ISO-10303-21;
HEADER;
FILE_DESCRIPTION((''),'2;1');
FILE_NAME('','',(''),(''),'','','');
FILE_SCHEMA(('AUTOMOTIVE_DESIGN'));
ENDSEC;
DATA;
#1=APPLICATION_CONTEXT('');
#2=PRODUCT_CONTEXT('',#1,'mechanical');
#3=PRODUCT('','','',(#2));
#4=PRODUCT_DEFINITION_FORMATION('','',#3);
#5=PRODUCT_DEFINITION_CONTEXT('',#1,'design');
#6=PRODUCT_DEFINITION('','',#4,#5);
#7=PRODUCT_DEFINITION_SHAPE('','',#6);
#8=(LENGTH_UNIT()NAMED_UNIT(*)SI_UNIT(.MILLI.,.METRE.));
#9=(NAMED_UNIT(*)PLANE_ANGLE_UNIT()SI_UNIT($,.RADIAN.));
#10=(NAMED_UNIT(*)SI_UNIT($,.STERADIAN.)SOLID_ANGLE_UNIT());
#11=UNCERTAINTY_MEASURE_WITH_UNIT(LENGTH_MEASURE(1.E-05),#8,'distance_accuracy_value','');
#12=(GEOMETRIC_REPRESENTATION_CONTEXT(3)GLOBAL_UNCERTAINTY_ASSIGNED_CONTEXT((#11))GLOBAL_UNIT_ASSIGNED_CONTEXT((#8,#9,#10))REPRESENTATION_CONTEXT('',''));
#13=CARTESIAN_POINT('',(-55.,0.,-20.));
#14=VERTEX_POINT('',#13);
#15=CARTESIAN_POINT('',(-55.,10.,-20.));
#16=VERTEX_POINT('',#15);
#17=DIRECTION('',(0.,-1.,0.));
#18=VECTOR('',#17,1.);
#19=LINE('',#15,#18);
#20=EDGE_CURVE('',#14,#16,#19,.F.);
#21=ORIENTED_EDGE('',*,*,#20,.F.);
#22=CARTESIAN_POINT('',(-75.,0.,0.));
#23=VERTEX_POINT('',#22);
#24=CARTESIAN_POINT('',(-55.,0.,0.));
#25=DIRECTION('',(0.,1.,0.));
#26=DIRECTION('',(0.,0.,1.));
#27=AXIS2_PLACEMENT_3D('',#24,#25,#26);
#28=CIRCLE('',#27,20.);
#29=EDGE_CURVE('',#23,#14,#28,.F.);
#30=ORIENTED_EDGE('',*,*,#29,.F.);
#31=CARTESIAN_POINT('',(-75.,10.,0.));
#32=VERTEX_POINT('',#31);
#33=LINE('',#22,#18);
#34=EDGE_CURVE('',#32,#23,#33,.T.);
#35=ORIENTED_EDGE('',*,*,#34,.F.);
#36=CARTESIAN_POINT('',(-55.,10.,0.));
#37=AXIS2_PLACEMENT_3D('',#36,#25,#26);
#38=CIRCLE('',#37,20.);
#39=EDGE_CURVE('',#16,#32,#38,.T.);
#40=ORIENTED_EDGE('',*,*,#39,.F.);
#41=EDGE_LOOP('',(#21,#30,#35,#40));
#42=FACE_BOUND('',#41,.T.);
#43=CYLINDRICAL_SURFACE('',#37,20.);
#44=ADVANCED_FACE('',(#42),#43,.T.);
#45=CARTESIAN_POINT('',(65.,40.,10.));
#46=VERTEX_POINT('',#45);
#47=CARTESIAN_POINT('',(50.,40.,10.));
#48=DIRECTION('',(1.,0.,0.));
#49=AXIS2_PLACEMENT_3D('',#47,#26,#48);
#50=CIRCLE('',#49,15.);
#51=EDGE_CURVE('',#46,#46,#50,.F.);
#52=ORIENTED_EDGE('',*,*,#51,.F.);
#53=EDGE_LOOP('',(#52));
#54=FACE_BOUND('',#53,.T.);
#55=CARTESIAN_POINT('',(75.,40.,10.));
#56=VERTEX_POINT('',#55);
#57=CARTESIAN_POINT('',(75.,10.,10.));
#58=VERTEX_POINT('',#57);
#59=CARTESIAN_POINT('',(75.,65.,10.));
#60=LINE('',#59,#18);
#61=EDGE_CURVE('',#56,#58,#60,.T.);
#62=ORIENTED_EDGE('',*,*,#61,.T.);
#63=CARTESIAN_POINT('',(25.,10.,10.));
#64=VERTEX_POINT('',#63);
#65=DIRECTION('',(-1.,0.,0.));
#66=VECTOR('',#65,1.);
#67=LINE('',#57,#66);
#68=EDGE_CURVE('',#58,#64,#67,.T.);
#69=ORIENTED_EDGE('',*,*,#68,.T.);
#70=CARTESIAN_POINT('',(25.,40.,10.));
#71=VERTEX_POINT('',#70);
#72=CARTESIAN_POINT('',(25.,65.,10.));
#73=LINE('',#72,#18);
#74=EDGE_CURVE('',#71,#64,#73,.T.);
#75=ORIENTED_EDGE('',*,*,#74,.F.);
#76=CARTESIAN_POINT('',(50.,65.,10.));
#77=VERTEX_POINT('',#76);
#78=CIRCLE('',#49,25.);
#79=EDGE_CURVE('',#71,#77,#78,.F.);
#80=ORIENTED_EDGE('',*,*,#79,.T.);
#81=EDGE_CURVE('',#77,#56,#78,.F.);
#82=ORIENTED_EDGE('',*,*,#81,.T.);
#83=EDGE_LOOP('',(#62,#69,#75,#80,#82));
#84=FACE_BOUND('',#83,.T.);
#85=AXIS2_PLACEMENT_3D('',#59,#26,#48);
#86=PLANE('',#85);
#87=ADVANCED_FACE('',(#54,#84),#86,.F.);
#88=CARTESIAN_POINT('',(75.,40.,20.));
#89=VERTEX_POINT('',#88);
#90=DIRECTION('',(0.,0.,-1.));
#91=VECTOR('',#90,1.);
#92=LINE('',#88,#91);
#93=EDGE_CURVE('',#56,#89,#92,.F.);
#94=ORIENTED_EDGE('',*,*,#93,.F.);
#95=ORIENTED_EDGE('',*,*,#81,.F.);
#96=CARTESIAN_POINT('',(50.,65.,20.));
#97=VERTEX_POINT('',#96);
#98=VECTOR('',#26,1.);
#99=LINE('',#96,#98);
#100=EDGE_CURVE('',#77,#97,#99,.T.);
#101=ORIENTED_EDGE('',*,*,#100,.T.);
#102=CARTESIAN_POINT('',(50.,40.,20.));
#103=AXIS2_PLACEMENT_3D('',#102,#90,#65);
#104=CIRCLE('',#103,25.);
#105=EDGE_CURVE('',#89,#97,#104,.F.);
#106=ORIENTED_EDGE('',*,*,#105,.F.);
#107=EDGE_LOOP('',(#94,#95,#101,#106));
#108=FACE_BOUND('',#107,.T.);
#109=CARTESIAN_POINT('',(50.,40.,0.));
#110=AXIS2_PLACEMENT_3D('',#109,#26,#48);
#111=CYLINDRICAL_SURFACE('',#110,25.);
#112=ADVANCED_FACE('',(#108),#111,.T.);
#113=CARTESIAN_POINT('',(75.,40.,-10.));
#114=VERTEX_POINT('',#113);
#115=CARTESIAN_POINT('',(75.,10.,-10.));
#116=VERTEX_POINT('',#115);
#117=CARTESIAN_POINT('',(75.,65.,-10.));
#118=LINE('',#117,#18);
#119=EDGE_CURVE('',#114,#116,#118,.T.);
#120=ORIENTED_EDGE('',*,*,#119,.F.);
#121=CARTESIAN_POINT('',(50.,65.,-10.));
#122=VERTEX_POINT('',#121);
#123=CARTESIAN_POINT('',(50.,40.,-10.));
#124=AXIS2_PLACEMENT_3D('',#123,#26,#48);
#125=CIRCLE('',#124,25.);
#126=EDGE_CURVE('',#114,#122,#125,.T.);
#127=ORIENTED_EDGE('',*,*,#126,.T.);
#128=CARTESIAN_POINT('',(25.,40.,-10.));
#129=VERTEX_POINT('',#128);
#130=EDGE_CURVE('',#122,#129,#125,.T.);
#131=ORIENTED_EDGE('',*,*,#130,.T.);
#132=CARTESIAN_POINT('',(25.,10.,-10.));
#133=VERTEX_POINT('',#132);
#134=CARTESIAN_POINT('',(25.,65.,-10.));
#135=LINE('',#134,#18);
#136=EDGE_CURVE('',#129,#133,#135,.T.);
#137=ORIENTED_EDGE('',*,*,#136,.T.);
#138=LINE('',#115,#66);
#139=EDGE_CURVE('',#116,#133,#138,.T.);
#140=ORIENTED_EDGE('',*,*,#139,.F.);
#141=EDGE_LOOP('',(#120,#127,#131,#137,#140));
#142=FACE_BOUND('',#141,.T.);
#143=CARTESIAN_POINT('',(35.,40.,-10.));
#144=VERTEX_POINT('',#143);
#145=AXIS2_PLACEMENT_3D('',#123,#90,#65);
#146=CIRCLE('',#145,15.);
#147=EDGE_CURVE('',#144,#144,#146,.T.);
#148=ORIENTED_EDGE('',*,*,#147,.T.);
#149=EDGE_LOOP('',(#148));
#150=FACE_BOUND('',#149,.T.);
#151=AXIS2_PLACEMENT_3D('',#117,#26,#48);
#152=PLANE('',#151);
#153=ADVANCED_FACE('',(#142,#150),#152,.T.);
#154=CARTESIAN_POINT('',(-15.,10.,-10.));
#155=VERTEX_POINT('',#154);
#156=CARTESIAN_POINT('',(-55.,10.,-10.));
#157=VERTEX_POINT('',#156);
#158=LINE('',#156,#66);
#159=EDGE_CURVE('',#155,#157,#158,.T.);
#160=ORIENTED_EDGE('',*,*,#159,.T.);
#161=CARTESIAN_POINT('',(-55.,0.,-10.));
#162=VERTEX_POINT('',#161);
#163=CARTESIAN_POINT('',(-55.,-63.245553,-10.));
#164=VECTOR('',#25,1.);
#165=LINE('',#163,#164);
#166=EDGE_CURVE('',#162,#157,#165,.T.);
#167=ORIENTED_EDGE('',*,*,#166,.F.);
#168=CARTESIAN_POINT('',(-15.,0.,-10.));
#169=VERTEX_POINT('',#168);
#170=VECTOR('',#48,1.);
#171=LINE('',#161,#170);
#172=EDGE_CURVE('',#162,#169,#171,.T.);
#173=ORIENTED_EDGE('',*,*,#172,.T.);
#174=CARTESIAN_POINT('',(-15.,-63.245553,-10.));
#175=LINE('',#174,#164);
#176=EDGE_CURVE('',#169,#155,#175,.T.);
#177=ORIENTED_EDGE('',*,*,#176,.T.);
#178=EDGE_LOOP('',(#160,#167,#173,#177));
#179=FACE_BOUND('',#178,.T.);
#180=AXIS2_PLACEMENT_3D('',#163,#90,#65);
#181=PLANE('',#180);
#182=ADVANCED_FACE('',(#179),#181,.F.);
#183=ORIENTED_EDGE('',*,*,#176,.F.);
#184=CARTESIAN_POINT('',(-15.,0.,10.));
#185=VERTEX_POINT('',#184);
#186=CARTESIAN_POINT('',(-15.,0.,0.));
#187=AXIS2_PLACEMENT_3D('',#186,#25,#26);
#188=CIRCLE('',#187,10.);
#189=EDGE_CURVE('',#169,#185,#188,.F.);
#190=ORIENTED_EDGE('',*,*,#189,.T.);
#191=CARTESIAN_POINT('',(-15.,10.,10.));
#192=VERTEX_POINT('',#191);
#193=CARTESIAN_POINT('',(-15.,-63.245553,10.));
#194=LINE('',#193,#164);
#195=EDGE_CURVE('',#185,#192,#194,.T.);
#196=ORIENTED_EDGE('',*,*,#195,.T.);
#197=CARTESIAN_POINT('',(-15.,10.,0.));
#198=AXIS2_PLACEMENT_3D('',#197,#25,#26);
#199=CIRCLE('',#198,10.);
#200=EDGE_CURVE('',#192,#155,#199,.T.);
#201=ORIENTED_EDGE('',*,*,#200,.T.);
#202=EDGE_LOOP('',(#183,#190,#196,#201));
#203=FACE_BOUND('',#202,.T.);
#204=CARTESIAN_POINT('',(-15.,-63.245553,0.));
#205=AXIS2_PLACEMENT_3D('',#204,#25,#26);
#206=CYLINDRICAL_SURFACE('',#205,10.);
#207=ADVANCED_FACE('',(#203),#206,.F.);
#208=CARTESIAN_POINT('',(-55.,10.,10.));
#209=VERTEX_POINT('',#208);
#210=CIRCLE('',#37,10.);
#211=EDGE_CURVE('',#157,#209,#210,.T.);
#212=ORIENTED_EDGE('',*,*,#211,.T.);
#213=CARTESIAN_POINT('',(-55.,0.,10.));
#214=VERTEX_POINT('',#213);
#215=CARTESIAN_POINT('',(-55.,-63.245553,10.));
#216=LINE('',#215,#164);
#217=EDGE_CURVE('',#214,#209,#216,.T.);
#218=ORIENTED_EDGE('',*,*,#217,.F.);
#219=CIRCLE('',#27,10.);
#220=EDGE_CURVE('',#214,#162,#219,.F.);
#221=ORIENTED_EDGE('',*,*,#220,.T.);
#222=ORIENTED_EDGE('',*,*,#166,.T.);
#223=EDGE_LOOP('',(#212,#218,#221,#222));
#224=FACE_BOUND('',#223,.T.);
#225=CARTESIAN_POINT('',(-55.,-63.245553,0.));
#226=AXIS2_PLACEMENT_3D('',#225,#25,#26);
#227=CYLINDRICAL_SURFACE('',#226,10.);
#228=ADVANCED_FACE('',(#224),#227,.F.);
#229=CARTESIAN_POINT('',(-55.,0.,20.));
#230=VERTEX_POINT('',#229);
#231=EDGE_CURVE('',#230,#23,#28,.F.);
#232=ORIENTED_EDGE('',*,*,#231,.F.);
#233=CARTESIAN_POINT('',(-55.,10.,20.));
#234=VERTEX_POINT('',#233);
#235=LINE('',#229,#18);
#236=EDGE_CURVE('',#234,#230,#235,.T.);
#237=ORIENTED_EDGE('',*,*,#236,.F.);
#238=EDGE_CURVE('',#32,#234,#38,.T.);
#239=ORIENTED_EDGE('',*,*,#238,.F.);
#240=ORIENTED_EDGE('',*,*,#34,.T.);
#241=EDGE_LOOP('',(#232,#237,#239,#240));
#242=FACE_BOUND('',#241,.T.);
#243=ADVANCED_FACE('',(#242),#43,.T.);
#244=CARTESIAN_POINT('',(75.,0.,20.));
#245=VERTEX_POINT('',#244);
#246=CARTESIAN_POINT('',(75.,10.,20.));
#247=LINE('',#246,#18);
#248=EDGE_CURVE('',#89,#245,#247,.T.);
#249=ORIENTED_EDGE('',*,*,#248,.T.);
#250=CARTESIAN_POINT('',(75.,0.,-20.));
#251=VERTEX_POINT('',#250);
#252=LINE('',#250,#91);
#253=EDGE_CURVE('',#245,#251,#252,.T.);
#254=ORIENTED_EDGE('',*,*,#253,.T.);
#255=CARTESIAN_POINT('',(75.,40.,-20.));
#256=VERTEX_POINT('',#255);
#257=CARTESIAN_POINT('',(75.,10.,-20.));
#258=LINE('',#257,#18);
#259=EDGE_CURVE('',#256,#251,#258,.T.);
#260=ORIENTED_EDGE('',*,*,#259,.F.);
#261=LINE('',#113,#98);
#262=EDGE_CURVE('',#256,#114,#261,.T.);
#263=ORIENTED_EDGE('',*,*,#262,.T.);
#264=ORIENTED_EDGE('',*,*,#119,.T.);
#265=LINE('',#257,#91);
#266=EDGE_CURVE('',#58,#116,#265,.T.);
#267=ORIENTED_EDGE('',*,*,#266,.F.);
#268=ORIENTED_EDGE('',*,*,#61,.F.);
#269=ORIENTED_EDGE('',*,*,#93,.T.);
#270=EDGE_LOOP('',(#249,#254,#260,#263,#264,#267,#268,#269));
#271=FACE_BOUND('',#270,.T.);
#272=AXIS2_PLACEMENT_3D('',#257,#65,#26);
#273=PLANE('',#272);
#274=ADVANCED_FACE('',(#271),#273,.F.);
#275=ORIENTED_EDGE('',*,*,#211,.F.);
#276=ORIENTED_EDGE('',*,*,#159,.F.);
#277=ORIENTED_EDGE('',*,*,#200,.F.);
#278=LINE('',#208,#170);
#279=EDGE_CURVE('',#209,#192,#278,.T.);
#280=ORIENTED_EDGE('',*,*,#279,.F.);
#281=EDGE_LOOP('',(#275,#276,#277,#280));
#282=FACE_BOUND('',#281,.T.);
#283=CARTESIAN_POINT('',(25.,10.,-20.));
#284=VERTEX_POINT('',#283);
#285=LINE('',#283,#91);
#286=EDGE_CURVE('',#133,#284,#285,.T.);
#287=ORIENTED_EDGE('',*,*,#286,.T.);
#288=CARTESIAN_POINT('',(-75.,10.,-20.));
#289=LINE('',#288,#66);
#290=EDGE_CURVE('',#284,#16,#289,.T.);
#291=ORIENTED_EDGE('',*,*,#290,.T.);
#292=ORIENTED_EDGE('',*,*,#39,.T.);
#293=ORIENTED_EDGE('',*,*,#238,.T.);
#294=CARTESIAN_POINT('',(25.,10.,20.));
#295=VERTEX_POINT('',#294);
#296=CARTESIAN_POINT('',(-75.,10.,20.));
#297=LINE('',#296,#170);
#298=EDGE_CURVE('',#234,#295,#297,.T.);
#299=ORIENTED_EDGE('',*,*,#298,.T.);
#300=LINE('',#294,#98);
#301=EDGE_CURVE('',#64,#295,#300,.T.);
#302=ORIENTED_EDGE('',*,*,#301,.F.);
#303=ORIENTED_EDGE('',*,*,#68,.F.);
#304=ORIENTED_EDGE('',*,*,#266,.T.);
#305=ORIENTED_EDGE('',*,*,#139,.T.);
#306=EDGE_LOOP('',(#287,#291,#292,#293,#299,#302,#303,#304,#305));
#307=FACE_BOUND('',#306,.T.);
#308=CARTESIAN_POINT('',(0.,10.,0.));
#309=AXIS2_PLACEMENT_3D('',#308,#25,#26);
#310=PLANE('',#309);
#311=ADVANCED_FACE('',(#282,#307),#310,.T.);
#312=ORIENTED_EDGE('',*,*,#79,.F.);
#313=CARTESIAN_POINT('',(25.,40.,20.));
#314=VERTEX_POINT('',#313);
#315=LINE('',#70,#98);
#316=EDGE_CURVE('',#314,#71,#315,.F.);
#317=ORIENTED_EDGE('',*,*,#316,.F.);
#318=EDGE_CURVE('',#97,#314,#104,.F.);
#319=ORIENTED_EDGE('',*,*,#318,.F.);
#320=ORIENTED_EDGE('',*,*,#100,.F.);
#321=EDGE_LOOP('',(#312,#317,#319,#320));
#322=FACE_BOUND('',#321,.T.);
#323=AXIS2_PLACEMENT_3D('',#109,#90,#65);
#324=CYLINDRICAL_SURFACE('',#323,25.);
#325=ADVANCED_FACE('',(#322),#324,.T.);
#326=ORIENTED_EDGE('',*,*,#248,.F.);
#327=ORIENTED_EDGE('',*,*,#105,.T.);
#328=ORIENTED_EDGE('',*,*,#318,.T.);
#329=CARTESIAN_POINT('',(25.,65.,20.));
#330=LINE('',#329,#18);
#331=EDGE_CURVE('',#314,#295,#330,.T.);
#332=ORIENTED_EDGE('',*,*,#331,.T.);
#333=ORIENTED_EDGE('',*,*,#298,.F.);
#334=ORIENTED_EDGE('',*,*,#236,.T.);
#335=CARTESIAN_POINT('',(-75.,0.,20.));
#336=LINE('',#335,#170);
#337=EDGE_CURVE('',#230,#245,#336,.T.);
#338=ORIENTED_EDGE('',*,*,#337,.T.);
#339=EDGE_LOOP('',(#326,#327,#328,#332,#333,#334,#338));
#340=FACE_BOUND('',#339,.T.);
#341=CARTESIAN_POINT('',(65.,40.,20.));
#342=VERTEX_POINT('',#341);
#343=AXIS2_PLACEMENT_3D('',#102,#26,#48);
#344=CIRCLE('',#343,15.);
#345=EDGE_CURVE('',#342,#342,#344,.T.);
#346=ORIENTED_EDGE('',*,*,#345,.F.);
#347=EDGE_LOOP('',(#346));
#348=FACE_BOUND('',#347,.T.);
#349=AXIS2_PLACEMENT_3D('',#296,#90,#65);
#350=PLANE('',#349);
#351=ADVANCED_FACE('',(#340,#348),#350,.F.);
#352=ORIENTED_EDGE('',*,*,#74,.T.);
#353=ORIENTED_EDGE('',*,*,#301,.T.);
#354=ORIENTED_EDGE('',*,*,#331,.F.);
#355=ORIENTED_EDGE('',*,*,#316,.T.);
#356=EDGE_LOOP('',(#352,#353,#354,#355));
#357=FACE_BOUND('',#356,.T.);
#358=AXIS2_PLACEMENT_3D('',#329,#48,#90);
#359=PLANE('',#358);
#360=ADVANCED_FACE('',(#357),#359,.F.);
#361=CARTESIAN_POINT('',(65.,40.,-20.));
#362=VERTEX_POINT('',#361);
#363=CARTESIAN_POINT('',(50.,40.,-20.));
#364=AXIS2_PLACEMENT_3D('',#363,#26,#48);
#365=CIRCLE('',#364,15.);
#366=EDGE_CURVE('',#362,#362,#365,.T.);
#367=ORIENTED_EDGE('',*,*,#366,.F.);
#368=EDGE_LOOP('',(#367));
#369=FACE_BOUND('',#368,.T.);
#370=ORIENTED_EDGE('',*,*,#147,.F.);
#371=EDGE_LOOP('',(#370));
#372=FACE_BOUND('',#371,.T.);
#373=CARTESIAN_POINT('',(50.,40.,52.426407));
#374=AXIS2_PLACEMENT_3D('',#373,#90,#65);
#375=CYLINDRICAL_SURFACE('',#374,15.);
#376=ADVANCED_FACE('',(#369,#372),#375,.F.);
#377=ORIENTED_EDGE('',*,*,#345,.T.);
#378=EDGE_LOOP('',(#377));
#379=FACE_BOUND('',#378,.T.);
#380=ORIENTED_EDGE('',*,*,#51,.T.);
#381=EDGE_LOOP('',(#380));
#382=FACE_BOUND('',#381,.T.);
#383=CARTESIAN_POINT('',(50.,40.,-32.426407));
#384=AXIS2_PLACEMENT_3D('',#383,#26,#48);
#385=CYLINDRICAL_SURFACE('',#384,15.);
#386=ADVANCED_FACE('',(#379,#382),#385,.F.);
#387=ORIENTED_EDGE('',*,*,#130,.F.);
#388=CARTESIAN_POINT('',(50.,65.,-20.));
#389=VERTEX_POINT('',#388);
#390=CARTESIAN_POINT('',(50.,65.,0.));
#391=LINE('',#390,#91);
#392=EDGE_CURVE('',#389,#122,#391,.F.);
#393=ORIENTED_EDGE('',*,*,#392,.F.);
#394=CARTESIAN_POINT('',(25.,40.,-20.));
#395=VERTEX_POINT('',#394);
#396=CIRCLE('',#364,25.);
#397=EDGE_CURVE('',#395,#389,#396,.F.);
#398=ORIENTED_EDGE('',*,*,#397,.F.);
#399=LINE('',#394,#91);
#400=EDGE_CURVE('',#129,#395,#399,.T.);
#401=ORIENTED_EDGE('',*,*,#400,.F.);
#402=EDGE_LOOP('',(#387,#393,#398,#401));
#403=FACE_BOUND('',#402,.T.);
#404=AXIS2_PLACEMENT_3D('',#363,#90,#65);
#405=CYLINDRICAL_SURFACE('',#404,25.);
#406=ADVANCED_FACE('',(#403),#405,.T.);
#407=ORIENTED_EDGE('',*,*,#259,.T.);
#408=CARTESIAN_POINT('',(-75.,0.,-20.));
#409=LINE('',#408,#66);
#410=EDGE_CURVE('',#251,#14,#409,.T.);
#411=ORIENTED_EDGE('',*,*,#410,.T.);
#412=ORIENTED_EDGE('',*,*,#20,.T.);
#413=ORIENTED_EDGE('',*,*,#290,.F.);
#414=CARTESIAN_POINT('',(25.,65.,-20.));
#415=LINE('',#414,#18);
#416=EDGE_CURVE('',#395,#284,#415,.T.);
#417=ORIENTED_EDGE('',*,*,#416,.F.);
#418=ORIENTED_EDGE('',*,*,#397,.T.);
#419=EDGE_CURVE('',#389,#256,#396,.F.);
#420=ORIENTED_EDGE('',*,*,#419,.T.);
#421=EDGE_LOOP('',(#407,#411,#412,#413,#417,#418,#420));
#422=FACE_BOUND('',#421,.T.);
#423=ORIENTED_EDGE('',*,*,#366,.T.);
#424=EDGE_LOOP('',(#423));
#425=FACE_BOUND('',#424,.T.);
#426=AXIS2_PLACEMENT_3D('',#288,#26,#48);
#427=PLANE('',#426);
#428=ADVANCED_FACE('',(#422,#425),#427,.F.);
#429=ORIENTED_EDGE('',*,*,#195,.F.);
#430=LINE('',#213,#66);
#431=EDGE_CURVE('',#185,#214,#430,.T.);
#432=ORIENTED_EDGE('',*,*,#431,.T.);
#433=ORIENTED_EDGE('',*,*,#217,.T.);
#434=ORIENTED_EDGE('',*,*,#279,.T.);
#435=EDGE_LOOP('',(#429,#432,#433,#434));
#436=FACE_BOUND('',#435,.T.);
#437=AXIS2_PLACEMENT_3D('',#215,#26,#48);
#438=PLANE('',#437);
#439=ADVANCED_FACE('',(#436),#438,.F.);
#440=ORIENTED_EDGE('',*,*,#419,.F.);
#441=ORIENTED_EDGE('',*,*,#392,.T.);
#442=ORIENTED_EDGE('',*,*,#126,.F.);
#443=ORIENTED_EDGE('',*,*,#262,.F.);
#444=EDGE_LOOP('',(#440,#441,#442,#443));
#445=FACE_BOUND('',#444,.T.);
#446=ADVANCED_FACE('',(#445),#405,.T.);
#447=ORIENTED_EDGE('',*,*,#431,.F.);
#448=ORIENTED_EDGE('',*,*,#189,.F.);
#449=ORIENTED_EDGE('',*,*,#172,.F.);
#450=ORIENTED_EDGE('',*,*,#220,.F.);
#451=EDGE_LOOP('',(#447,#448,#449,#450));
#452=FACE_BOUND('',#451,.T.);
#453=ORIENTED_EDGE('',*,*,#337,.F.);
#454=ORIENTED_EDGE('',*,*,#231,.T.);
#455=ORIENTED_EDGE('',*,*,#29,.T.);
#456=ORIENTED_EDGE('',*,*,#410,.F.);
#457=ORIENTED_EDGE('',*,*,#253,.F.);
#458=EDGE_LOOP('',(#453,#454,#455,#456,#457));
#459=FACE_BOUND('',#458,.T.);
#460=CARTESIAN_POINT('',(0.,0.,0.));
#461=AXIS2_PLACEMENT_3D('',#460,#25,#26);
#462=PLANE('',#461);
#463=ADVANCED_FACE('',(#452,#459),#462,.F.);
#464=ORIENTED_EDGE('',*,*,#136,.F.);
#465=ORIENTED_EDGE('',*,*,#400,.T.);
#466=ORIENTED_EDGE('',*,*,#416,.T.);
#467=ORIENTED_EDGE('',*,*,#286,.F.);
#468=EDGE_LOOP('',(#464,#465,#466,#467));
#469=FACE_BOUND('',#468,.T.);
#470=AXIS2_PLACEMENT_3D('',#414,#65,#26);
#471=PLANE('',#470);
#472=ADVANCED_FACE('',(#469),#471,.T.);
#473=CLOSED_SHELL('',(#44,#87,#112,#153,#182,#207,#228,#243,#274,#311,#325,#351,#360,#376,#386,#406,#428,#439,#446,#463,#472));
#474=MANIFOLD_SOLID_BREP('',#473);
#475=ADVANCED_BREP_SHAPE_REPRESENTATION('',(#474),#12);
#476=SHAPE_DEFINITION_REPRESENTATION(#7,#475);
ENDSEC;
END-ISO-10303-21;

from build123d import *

# Parameters (mm, degrees)
SKETCH2_W            = 150
SKETCH2_H            = 40
BOSS_EXTRUDE1_DEPTH  = 10
FILLET2_R            = 20
SKETCH10_W           = 50
SKETCH10_H           = 10
BOSS_EXTRUDE4_DEPTH  = 55
SKETCH12_R           = 15
CUT_EXTRUDE2_DEPTH   = 10
FILLET3_R            = 25
FILLET3_OF_MIRROR1_R = 25
FILLET4_R            = 20
CUT_EXTRUDE4_DEPTH   = 10


with BuildPart() as part:
    # Sketch2 → Boss-Extrude1 (new body)
    with BuildSketch(Plane(origin=(0, 0, 0), x_dir=(1, 0, 0), z_dir=(0, 1, 0))):
        Rectangle(SKETCH2_W, SKETCH2_H)
    boss_extrude1 = extrude(amount=BOSS_EXTRUDE1_DEPTH)

    # Fillet2
    fillet2_edges = [part.edges().sort_by_distance(p)[0] for p in [
        (-75, 5, 20),
        (-75, 5, -20),
    ]]
    fillet(fillet2_edges, radius=FILLET2_R - 0.0001)  # a hair under: the kernel refuses the full size

    # Sketch10 → Boss-Extrude4 (add)
    with BuildSketch(Plane(origin=(0, 10, 0), x_dir=(1, 0, 0), z_dir=(0, 1, 0))):
        with Locations((50, -15)):
            Rectangle(SKETCH10_W, SKETCH10_H)
    boss_extrude4 = extrude(amount=BOSS_EXTRUDE4_DEPTH)

    # Sketch12 → Cut-Extrude2 (cut)
    with BuildSketch(Plane.XY.offset(20)):
        with Locations((50, 40)):
            Circle(SKETCH12_R)
    cut_extrude2 = extrude(amount=-CUT_EXTRUDE2_DEPTH, mode=Mode.SUBTRACT)

    # Fillet3
    fillet3_edges = [part.edges().sort_by_distance(p)[0] for p in [
        (75, 65, 15),
        (25, 65, 15),
    ]]
    fillet(fillet3_edges, radius=FILLET3_R - 0.0001)  # a hair under: the kernel refuses the full size

    # Mirror1: Boss-Extrude1, Boss-Extrude4 across plane
    add(boss_extrude1.mirror(Plane.XY))
    add(boss_extrude4.mirror(Plane.XY))

    # Fillet3 of Mirror1
    fillet3_of_mirror1_edges = [part.edges().sort_by_distance(p)[0] for p in [
        (75, 65, -15),
        (25, 65, -15),
    ]]
    fillet(fillet3_of_mirror1_edges, radius=FILLET3_OF_MIRROR1_R - 0.0001)  # a hair under: the kernel refuses the full size

    # Mirror2: Cut-Extrude2 across plane
    add(cut_extrude2.mirror(Plane.XY), mode=Mode.SUBTRACT)

    # Fillet4
    fillet4_edges = [part.edges().sort_by_distance(p)[0] for p in [
        (-75, 5, -20),
        (-75, 5, 20),
    ]]
    fillet(fillet4_edges, radius=FILLET4_R - 0.0001)  # a hair under: the kernel refuses the full size

    # Sketch9 → Cut-Extrude4 (cut)
    with BuildSketch(Plane(origin=(0, 10, 0), x_dir=(1, 0, 0), z_dir=(0, 1, 0))):
        with BuildLine():
            Line((-55, 10), (-15, 10))
            ThreePointArc((-15, 10), (-5, 0), (-15, -10))
            Line((-15, -10), (-55, -10))
            ThreePointArc((-55, -10), (-65, 0), (-55, 10))
        make_face()
    extrude(amount=-CUT_EXTRUDE4_DEPTH, mode=Mode.SUBTRACT)


solid = part.part
